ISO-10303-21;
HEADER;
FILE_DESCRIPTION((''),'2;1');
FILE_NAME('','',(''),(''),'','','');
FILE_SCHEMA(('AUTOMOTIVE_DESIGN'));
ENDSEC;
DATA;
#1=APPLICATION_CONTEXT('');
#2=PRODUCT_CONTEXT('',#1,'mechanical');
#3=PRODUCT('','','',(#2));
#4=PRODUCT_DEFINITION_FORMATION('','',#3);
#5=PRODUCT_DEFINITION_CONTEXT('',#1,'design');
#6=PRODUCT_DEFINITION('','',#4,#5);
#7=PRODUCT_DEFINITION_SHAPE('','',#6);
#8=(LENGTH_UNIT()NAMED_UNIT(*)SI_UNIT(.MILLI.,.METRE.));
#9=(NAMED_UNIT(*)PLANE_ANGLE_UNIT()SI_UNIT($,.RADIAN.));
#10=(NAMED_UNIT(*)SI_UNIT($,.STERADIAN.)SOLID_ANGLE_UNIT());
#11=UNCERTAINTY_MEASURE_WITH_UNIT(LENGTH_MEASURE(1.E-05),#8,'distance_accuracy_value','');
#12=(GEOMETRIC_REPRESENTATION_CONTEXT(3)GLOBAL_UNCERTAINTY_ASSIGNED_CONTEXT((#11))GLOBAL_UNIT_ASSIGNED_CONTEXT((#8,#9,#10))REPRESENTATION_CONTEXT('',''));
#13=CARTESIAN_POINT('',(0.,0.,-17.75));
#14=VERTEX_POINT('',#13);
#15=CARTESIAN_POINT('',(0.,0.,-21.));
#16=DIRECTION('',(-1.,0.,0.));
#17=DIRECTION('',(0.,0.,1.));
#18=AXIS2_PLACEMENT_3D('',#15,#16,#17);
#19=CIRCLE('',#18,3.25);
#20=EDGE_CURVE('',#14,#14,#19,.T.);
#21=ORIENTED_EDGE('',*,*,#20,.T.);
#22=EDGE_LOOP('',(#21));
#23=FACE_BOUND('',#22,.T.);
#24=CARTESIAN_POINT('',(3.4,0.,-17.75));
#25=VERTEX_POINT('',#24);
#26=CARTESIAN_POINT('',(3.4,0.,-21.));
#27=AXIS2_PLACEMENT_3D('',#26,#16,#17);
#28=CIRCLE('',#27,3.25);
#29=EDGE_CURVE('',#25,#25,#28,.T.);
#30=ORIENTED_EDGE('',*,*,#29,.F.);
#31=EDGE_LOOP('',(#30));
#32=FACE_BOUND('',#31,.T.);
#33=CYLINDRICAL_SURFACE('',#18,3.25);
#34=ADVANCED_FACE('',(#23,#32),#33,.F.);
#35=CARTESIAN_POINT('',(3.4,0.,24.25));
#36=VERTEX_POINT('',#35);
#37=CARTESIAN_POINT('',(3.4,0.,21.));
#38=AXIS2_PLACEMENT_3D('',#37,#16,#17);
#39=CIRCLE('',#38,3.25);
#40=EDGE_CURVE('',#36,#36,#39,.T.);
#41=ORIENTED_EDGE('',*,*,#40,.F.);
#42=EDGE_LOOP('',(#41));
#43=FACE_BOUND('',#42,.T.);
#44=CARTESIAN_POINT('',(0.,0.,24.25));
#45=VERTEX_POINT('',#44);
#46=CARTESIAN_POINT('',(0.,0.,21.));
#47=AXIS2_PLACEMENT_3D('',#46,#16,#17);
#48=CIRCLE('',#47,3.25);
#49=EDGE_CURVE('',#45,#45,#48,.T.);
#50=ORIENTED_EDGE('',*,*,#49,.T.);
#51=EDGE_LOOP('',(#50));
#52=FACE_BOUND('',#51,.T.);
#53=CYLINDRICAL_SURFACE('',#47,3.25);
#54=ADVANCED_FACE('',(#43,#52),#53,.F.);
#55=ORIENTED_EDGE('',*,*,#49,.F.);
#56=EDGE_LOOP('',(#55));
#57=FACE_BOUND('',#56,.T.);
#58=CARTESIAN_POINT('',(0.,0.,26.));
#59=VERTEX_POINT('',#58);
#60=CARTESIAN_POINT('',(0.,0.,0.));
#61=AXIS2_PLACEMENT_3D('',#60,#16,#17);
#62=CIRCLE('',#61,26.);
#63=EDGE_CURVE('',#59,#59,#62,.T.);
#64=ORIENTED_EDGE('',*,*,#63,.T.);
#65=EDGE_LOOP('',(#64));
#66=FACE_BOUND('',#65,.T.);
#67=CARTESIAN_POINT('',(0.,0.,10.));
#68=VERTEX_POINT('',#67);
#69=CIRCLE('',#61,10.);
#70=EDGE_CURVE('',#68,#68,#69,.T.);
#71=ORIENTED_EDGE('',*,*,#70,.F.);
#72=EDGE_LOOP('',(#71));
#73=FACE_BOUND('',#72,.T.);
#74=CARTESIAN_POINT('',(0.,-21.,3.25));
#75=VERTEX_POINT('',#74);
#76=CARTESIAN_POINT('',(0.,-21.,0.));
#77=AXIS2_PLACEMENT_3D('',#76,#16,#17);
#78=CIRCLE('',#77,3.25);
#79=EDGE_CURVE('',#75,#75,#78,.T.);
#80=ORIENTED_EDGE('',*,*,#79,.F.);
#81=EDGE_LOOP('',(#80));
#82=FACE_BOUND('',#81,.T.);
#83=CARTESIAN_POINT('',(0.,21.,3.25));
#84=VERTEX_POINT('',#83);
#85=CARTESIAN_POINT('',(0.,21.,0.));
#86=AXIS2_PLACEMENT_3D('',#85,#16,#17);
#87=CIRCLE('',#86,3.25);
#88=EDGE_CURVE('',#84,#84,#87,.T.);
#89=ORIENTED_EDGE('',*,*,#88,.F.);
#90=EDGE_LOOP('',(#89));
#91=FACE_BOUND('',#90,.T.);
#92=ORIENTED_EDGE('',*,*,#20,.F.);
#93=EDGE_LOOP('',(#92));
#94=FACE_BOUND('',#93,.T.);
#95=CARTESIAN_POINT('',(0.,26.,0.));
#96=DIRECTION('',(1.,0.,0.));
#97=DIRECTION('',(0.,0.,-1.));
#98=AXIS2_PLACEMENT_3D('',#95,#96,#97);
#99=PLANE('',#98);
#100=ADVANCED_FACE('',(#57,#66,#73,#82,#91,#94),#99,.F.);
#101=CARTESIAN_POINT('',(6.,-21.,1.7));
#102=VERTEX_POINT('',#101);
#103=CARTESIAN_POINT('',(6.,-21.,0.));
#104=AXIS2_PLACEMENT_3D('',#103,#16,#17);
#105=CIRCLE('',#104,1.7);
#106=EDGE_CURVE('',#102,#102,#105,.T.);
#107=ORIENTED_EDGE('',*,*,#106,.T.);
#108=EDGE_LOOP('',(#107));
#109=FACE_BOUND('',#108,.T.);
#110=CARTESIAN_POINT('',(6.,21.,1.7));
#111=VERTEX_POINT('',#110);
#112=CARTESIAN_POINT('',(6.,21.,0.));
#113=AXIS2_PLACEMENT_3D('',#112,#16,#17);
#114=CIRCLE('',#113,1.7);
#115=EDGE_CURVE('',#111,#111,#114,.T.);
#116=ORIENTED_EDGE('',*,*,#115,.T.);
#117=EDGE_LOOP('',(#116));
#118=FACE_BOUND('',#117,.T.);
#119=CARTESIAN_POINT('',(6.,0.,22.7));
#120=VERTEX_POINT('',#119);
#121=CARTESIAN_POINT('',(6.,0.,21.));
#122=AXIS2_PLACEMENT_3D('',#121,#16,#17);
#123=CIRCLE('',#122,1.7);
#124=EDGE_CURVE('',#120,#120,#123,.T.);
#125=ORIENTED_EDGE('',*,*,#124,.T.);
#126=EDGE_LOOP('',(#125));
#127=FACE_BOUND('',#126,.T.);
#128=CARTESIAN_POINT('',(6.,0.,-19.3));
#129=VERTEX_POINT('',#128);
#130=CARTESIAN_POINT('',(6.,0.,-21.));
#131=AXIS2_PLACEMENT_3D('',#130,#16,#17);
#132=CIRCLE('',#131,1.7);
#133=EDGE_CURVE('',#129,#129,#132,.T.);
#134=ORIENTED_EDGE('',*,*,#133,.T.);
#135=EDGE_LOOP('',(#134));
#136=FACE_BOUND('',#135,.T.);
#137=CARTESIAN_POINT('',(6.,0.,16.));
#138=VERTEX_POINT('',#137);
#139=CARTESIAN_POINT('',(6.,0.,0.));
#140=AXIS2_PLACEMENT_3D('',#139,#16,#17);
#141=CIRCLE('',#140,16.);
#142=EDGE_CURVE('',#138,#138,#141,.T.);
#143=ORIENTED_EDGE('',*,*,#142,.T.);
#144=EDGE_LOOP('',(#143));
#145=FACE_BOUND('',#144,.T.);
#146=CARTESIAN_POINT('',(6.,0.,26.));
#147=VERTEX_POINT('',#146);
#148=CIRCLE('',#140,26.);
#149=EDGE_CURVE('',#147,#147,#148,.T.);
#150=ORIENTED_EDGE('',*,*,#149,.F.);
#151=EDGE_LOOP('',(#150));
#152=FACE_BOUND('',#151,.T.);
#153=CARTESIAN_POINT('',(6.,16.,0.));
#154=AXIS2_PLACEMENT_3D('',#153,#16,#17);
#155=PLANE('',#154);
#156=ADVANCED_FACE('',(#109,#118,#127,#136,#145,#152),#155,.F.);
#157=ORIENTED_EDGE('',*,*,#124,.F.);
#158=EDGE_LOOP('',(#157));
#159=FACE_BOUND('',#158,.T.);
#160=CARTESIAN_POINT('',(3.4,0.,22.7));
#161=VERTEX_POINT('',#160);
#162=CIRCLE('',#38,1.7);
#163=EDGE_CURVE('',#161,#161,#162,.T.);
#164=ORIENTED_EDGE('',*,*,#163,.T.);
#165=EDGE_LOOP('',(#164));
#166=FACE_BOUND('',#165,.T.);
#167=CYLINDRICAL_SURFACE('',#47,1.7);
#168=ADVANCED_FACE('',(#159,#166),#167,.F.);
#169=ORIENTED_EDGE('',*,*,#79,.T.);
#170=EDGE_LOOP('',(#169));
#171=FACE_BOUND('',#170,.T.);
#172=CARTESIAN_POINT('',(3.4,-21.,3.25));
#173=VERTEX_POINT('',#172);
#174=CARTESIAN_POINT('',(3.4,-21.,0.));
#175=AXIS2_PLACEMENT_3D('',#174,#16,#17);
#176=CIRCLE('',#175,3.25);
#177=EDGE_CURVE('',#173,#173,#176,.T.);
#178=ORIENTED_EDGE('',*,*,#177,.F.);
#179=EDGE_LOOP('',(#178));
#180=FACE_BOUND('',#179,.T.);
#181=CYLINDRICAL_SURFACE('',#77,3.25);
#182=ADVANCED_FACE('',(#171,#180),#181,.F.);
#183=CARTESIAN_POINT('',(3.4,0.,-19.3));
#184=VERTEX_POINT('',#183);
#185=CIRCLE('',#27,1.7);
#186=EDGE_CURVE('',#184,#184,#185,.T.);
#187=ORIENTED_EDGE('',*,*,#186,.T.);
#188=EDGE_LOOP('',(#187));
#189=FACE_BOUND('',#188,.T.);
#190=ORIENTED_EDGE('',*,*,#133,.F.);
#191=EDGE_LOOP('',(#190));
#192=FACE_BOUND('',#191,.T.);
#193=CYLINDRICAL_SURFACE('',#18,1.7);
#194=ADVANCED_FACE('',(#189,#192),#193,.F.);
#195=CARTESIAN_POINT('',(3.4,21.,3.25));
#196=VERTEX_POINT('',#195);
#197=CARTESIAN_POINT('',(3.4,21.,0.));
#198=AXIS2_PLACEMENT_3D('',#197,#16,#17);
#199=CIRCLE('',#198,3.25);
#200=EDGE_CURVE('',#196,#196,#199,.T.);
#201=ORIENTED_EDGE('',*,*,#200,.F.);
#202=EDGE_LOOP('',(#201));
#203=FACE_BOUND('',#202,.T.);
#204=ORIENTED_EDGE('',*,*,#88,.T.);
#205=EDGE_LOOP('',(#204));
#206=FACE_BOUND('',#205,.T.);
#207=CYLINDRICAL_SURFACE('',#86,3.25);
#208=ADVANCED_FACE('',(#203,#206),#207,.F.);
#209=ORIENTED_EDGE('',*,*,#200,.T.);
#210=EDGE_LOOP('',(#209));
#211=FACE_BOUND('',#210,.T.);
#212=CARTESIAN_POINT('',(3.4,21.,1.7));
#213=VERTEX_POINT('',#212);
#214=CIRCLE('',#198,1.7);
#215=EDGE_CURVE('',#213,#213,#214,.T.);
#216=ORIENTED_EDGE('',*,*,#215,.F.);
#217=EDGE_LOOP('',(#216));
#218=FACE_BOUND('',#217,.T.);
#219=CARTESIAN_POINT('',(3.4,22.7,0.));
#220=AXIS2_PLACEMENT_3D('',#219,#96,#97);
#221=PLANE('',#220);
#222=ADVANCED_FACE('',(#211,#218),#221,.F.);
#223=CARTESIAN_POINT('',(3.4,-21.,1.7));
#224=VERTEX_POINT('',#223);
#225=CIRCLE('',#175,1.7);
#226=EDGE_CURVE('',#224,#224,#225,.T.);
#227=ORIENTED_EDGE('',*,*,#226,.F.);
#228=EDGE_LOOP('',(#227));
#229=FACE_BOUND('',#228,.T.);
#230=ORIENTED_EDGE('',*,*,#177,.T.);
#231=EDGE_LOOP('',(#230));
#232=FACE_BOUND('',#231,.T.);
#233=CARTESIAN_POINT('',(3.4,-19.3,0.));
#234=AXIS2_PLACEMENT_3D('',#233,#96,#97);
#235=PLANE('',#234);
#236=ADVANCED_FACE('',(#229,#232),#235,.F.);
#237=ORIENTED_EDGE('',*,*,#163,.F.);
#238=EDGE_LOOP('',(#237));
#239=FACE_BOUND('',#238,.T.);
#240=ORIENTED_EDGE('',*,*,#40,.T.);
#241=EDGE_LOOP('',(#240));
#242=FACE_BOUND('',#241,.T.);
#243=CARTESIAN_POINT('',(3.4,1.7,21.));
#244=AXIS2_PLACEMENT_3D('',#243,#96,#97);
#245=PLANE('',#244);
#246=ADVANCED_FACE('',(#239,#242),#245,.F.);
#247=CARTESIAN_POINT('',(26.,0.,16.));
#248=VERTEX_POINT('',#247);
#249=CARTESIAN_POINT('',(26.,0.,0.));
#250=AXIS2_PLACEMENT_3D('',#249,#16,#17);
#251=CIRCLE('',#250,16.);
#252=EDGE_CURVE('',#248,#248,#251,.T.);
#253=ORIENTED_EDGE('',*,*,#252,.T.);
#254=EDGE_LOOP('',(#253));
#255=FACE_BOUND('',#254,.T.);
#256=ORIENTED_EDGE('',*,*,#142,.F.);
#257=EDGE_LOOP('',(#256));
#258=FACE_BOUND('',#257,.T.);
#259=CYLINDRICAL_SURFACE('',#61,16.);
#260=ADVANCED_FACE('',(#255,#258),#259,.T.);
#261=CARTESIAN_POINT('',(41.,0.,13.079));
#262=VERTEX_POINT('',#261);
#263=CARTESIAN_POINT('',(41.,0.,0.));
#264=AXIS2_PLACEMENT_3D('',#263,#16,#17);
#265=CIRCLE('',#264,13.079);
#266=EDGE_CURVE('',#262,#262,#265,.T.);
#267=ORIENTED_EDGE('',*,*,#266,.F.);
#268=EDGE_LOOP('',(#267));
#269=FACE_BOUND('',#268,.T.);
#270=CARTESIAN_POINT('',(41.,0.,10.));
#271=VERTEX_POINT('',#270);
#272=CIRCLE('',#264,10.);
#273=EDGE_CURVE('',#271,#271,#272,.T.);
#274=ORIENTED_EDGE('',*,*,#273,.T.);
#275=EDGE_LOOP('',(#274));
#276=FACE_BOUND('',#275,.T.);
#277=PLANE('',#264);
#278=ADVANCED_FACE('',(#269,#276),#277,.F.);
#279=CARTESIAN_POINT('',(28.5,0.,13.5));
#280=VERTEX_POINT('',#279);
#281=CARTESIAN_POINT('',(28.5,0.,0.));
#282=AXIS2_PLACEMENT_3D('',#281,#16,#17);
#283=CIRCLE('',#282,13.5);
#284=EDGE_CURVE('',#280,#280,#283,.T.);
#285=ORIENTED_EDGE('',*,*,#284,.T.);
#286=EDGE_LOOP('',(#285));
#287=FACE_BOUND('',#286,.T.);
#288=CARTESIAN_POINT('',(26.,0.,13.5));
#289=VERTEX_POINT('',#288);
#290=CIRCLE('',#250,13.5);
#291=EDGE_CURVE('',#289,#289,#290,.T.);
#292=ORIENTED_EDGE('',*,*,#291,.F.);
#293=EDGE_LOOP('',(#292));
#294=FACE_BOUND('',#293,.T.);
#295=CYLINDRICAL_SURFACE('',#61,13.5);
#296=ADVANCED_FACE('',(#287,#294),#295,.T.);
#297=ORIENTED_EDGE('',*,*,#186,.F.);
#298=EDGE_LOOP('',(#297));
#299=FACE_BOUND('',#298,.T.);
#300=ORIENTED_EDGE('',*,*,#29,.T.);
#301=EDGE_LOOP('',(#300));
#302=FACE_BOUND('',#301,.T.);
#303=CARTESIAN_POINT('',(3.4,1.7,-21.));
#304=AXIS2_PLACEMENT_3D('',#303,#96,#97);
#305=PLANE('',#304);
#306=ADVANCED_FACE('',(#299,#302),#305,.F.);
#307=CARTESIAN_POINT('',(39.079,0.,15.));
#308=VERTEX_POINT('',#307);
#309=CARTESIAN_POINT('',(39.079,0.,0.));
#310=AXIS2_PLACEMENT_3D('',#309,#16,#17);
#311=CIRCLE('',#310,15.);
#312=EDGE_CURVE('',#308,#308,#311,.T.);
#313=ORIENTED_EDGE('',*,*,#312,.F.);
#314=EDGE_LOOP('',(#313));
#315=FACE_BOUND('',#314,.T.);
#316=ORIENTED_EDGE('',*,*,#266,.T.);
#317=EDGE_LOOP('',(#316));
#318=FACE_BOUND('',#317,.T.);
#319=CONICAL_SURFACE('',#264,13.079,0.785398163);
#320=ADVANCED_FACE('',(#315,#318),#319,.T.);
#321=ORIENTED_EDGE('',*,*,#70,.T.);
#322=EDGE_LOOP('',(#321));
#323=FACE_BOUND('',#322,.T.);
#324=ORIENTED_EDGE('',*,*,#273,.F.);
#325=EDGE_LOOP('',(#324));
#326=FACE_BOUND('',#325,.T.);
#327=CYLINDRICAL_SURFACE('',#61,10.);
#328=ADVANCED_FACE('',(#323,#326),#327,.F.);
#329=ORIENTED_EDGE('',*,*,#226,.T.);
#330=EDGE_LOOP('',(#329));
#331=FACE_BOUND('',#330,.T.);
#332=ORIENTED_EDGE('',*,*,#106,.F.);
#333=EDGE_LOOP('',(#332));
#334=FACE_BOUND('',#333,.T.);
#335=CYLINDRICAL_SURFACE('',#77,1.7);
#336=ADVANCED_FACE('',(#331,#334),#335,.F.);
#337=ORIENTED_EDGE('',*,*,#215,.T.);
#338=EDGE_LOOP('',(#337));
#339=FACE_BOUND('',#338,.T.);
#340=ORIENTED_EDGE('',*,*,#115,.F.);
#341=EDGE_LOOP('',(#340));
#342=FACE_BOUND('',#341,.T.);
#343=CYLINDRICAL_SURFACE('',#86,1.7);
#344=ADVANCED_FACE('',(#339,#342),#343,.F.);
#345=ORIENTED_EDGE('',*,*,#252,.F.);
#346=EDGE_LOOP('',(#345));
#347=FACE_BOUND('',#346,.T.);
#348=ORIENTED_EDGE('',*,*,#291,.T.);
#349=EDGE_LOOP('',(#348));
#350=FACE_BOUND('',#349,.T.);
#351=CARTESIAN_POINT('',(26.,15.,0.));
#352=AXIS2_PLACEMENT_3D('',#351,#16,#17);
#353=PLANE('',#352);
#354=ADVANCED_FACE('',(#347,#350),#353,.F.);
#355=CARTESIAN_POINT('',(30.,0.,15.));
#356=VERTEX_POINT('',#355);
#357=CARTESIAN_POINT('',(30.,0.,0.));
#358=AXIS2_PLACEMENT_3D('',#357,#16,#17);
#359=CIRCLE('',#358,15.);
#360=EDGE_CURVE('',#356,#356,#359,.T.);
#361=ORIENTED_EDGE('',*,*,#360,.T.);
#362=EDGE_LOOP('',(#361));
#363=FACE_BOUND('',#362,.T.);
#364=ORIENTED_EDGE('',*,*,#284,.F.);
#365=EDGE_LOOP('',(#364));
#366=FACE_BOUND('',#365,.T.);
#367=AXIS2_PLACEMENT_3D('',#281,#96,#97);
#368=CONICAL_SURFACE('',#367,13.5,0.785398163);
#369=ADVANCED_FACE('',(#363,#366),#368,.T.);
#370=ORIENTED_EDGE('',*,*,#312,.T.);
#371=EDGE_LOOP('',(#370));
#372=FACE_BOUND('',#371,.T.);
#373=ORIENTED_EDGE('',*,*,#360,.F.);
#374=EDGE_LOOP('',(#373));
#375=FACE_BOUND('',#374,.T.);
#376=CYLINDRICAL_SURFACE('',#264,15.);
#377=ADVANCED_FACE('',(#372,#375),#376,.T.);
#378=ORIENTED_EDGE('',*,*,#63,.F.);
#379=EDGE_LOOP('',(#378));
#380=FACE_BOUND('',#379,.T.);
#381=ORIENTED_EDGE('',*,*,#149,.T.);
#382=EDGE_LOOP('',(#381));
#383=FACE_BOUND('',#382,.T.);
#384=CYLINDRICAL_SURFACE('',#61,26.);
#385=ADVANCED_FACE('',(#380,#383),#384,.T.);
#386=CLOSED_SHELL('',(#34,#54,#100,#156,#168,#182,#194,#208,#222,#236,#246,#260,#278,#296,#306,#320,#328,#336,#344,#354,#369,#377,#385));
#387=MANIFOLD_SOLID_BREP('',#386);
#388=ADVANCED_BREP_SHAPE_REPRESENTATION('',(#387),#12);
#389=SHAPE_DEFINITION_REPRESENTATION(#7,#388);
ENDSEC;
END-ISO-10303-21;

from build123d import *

# Parameters (mm, degrees)
CBORE_FOR_M3_HEX_SOCKET_HEAD_CAP_SCREW1_D           = 3.4
CBORE_FOR_M3_HEX_SOCKET_HEAD_CAP_SCREW1_CBORE_D     = 6.5
CBORE_FOR_M3_HEX_SOCKET_HEAD_CAP_SCREW1_CBORE_DEPTH = 3.4
F_20_0MM_DOWEL_HOLE1_D                              = 20


# Read off the part's stored shape, not the designer's step: M30 Machine Threads Stud1
with BuildPart() as part:
    # Sketch1 → Revolve1 (revolve)
    with BuildSketch(Plane.XY, mode=Mode.PRIVATE) as revolve1_sk:
        Polygon((0, 0), (41, 0), (41, 16), (6, 16), (6, 26), (0, 26), align=None)
    revolve(revolve1_sk.sketch.rotate(Axis((0, 0, 0), (1, 0, 0)), 90), axis=Axis((0, 0, 0), (1, 0, 0)))

    # M30 Machine Threads Stud1 outline → M30 Machine Threads Stud1 (revolve, cut)
    with BuildSketch(Plane.YX):
        Polygon((16, 41), (13.079, 41), (15, 39.079), (15, 26), (16, 26), align=None)
    revolve(axis=Axis((0, 0, 0), (1, 0, 0)), mode=Mode.SUBTRACT)

    # CBORE for M3 Hex Socket Head Cap Screw1 (through all)
    with Locations(Plane.ZY):
        with Locations((-21, 0), (0, 21), (21, 0), (0, -21)):
            CounterBoreHole(CBORE_FOR_M3_HEX_SOCKET_HEAD_CAP_SCREW1_D / 2, CBORE_FOR_M3_HEX_SOCKET_HEAD_CAP_SCREW1_CBORE_D / 2, CBORE_FOR_M3_HEX_SOCKET_HEAD_CAP_SCREW1_CBORE_DEPTH)

    # Ø20.0mm Dowel Hole1 (through all)
    with Locations(Plane.ZY):
        with Locations((0, 0)):
            Hole(F_20_0MM_DOWEL_HOLE1_D / 2)

    # Sketch9 → Cut-Revolve1 (revolve, cut)
    with BuildSketch(Plane.XY, mode=Mode.PRIVATE) as cut_revolve1_sk:
        Polygon((30, 15), (28.5, 13.5), (26, 13.5), (26, 15), align=None)
    revolve(cut_revolve1_sk.sketch.rotate(Axis((0, 0, 0), (1, 0, 0)), 90), axis=Axis((0, 0, 0), (1, 0, 0)), mode=Mode.SUBTRACT)


solid = part.part
